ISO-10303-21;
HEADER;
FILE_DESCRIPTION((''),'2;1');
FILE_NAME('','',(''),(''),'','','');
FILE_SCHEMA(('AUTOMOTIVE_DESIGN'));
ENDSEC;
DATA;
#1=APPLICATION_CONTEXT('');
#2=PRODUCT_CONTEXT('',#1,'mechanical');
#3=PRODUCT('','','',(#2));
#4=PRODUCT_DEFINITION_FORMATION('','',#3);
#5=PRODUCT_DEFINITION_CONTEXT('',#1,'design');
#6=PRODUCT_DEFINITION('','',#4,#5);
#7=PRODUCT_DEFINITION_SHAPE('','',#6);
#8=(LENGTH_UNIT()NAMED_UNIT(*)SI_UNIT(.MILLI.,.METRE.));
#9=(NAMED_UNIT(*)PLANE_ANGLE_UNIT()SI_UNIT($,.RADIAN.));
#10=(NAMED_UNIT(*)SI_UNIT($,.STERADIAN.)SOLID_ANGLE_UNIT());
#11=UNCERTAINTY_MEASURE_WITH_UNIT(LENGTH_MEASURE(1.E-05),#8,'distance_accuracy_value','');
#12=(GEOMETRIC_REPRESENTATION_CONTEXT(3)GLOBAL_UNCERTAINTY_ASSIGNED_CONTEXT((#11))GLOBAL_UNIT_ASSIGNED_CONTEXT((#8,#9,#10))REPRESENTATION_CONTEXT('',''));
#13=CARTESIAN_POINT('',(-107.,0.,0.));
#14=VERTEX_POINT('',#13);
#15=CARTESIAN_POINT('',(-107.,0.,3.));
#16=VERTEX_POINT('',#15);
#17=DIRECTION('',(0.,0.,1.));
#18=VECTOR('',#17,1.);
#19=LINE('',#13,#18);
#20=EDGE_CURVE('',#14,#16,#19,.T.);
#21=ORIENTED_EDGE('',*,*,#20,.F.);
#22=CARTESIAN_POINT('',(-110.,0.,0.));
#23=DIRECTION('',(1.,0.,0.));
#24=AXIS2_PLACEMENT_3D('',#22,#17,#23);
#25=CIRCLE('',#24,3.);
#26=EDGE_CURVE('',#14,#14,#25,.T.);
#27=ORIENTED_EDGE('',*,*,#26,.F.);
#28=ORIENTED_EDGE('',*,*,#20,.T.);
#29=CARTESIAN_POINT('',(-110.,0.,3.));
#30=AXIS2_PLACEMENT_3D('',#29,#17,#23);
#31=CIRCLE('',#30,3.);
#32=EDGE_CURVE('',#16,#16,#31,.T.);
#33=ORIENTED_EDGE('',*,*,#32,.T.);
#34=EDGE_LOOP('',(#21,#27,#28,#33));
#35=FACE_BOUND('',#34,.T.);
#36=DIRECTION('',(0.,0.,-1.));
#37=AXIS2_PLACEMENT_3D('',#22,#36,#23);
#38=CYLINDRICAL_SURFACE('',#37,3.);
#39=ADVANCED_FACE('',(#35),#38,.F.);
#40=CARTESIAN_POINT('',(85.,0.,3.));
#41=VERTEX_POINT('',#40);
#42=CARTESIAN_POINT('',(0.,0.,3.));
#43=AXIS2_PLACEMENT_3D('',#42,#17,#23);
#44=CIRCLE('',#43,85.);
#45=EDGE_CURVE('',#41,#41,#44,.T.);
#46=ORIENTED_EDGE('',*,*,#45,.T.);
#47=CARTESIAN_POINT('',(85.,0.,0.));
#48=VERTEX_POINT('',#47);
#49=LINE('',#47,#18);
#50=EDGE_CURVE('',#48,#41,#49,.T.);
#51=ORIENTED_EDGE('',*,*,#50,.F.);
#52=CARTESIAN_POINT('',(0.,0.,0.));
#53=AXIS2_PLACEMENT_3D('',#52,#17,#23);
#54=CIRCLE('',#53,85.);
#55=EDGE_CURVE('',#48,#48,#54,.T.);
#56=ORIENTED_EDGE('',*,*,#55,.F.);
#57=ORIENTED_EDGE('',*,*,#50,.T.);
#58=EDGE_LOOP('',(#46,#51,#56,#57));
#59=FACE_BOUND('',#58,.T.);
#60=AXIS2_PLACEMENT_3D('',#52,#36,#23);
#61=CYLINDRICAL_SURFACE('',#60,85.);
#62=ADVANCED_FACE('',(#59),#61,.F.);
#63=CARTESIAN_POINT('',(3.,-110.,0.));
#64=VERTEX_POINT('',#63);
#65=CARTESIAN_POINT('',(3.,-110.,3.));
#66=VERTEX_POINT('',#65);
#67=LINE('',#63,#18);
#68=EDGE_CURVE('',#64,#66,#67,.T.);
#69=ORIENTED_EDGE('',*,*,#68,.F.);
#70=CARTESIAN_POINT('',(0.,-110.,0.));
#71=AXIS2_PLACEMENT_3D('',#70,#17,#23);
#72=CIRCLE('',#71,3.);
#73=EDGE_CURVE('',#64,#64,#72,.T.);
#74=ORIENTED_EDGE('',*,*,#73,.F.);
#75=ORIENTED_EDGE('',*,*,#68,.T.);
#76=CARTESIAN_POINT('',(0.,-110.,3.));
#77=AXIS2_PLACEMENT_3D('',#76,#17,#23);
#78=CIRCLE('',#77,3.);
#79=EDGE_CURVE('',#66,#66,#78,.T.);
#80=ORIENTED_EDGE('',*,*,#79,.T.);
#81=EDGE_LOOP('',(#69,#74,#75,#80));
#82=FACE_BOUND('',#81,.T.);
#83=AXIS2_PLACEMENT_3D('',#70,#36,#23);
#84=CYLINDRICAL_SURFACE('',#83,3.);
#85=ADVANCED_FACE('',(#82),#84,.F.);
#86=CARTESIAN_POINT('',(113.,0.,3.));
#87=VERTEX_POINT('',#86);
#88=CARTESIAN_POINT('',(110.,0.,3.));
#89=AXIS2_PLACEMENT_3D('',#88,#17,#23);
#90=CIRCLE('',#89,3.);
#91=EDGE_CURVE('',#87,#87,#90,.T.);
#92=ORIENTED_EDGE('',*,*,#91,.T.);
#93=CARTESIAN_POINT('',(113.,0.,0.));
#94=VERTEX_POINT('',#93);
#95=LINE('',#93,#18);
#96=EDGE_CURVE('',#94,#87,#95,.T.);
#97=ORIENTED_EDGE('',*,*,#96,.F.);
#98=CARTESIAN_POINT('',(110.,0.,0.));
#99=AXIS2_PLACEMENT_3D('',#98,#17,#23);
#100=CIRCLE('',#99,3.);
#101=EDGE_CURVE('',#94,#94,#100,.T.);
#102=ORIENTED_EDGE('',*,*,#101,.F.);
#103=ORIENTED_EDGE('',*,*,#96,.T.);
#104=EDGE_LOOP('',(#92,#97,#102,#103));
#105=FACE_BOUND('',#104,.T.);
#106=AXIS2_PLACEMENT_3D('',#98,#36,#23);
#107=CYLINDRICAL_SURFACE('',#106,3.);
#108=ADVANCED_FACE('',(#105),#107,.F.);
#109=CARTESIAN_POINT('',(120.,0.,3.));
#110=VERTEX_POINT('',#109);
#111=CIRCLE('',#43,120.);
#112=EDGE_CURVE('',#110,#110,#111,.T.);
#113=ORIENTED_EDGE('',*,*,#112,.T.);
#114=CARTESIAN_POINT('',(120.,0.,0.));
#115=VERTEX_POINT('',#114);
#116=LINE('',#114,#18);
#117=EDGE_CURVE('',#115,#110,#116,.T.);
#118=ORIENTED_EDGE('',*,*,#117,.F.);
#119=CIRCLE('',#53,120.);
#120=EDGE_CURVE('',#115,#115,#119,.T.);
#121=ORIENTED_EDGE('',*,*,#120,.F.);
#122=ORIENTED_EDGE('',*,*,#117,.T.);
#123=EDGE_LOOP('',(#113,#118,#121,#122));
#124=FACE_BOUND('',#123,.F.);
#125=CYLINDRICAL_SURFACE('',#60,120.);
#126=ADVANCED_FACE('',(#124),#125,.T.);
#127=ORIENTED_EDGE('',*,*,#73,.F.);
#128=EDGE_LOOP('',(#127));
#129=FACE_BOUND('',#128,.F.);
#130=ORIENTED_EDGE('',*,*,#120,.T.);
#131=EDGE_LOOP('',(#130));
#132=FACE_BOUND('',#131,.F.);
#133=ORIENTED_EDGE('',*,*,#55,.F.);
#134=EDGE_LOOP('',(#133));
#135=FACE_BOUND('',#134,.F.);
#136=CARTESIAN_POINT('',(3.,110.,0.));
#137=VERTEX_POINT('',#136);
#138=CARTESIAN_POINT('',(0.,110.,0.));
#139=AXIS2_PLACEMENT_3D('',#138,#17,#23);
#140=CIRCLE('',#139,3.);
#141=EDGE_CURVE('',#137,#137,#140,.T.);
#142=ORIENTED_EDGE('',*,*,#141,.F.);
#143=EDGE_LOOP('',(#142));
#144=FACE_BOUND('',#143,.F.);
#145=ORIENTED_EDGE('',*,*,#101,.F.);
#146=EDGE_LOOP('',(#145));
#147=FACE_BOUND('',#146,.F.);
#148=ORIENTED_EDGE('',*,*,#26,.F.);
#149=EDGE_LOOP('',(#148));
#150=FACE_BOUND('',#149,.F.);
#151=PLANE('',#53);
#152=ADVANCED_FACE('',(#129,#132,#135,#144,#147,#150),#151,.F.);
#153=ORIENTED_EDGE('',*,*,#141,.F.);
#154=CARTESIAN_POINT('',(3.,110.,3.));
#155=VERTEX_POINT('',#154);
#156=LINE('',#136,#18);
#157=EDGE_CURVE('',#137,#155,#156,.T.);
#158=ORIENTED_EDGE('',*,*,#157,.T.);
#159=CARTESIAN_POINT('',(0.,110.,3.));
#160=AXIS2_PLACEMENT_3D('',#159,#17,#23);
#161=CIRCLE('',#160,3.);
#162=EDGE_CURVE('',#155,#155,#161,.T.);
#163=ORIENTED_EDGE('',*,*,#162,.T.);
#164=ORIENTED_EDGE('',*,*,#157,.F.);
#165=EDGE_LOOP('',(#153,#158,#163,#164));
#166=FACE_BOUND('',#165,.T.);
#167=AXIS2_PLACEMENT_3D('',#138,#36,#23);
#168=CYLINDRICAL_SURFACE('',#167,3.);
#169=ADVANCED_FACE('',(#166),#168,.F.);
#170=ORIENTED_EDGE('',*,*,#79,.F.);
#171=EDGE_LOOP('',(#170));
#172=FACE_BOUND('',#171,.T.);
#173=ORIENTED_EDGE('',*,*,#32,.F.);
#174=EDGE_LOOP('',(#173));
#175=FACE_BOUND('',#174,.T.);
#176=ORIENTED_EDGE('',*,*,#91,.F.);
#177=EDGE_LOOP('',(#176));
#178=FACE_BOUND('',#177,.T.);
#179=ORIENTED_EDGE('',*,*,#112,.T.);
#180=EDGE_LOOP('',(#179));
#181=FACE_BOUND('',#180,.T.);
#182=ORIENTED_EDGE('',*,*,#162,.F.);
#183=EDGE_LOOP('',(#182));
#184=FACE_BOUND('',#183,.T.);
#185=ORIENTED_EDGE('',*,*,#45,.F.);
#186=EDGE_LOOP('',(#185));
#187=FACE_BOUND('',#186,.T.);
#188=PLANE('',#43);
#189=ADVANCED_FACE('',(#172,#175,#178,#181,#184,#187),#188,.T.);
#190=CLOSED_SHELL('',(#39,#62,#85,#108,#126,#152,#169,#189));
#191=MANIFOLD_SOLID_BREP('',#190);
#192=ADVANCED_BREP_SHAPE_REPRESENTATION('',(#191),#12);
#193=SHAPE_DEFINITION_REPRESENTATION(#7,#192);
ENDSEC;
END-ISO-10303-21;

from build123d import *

# Parameters (mm, degrees)
F0_R     = 120
F0_R_2   = 3
F0_R_3   = 85
F1_DEPTH = 3


# Not quite as in the source:
# - a feature names something its author has since deleted; it is built from what else it names


with BuildPart() as f1:
    # F0 (on Top) → F1 (new body)
    with BuildSketch(Plane.XY):
        Circle(F0_R)
        with Locations((0, -110)):
            Circle(F0_R_2, mode=Mode.SUBTRACT)
        with Locations((-110, 0)):
            Circle(F0_R_2, mode=Mode.SUBTRACT)
        Circle(F0_R_3, mode=Mode.SUBTRACT)
        with Locations((110, 0)):
            Circle(F0_R_2, mode=Mode.SUBTRACT)
        with Locations((0, 110)):
            Circle(F0_R_2, mode=Mode.SUBTRACT)
    extrude(amount=F1_DEPTH)


solid = f1.part
